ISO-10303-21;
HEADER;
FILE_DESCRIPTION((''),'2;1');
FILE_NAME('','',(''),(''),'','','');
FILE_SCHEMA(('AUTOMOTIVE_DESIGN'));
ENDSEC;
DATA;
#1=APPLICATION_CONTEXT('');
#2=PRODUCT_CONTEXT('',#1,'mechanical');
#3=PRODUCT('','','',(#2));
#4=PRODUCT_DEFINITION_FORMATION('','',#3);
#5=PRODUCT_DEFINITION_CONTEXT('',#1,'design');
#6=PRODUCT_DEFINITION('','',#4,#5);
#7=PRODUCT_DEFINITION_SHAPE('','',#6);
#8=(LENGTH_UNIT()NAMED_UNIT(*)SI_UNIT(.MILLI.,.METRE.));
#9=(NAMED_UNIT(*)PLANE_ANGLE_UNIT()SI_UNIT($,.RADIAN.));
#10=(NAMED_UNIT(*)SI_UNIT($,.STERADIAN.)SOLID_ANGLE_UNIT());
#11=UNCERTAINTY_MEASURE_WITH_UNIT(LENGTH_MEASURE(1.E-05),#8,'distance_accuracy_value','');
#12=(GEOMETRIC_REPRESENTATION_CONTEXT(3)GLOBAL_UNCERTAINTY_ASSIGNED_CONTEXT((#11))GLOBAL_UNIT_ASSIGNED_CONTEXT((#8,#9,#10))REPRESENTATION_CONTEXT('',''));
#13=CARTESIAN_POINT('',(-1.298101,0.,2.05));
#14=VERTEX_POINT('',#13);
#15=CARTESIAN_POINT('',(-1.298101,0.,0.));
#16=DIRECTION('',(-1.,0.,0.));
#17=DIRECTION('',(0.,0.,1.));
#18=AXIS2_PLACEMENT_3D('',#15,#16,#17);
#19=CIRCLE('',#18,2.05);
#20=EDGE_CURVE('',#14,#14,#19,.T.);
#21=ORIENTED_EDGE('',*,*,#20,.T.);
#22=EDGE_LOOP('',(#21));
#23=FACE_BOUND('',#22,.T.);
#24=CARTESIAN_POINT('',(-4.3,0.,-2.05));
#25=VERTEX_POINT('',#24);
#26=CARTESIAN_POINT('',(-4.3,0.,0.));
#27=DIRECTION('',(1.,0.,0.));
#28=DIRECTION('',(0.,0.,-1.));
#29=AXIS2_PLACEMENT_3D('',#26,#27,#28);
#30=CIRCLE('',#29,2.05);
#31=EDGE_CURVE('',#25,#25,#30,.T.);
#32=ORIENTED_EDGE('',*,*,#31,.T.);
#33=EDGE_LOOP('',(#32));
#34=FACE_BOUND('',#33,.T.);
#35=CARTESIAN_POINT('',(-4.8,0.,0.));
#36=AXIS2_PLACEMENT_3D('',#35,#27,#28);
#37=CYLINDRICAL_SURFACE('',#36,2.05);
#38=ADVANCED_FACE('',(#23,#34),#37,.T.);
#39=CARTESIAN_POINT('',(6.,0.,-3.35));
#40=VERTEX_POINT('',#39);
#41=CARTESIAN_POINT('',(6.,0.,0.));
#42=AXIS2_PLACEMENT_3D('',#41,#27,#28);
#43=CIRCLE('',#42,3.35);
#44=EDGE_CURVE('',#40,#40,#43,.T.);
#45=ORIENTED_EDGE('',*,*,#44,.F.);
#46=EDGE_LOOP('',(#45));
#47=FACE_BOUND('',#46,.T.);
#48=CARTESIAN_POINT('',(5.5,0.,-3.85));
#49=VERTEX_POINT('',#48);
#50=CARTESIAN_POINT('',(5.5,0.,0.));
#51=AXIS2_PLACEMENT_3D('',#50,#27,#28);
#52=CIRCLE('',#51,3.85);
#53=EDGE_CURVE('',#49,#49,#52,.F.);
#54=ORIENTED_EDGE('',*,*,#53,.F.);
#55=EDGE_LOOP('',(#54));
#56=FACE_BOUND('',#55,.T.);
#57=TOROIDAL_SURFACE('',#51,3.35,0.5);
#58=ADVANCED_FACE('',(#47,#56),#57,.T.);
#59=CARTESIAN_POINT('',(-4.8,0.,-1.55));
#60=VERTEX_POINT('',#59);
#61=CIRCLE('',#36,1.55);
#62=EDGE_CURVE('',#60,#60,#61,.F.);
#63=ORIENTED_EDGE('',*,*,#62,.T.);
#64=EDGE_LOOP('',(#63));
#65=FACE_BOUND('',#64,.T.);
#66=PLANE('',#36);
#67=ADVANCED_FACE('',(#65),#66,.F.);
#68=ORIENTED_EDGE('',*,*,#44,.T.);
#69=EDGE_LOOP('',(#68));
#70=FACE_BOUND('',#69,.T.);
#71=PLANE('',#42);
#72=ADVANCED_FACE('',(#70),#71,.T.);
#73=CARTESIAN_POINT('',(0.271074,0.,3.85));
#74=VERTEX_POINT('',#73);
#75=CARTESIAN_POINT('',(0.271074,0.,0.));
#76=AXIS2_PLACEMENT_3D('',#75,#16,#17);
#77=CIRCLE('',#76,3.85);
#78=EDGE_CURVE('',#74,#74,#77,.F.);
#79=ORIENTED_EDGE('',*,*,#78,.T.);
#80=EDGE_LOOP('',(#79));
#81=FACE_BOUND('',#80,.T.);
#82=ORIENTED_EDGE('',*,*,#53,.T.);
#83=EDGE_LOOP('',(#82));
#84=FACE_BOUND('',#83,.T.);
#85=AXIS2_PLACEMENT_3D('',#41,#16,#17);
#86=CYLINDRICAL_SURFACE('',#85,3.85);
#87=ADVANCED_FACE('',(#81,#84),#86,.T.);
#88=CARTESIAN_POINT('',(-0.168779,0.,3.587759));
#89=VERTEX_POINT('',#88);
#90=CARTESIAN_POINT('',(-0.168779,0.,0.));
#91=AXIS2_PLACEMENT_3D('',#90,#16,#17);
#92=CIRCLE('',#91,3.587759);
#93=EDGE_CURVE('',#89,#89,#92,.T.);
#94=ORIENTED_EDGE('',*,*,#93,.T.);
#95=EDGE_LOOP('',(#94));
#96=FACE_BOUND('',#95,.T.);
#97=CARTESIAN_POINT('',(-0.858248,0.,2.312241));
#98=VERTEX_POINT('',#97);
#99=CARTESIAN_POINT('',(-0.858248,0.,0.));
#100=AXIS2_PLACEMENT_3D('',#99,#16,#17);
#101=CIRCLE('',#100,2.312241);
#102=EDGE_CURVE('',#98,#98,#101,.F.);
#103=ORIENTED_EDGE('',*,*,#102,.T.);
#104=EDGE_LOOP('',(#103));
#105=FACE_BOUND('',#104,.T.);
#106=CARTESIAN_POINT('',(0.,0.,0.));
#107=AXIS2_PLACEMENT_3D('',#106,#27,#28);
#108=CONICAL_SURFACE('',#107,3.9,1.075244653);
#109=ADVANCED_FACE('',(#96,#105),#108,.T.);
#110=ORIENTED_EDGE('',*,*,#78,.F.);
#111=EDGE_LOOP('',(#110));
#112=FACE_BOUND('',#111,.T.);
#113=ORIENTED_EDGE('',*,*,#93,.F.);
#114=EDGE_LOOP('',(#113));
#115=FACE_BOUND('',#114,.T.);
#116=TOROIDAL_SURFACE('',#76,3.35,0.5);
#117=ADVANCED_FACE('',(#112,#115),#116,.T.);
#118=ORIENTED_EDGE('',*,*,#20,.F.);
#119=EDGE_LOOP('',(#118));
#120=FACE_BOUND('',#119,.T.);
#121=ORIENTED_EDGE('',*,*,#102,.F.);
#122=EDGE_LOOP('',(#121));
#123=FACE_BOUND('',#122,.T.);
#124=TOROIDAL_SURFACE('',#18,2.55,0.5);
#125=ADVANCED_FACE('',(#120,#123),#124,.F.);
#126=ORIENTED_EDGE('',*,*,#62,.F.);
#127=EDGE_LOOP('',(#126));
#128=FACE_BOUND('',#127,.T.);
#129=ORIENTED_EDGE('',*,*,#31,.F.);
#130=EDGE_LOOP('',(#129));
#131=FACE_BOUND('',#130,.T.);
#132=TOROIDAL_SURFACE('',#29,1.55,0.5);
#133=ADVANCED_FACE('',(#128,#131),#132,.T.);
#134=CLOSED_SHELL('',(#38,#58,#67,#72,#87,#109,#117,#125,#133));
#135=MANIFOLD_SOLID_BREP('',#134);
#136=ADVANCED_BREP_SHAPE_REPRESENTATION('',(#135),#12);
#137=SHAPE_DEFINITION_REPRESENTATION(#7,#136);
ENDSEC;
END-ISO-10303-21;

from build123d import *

# Parameters (mm, degrees)
CROQUIS1_R              = 3.85
CROQUIS1_R_2            = 2.05
SALIENTE_EXTRUIR1_DEPTH = 6
CROQUIS1_3_R            = 2.05
SALIENTE_EXTRUIR2_DEPTH = 4.8
CHAFL_N1_SIZE           = 1.85
CHAFL_N1_SIZE_2         = 1
REDONDEO1_R             = 0.5


with BuildPart() as part:
    # Croquis1 → Saliente-Extruir1 (new body)
    # profile 1 of 2: a face of its own
    with BuildSketch(Plane.YZ):
        with Locations(Location((0, 0, 0), (0, 0, 270))):
            Circle(CROQUIS1_R)
        Circle(CROQUIS1_R_2, mode=Mode.SUBTRACT)
    # profile 2 of 2: a face of its own
    with BuildSketch(Plane.YZ):
        Circle(CROQUIS1_R_2)
    extrude(amount=SALIENTE_EXTRUIR1_DEPTH)

    # Croquis1<3> → Saliente-Extruir2 (add)
    with BuildSketch(Plane.YZ):
        with Locations(Location((0, 0, 0), (0, 0, 270))):
            Circle(CROQUIS1_3_R)
    extrude(amount=-SALIENTE_EXTRUIR2_DEPTH)

    # Chaflán1
    # the kernel refuses this chamfer: 1.85, 1 mm, written as the material it adds along each edge
    with BuildSketch(Plane(origin=(0, 0, 0), x_dir=(0, 0, -1), z_dir=(0, -1, 0))) as chafl_n1_piece_1_section:
        Polygon((2.05 + CHAFL_N1_SIZE, 0), (2.05, -CHAFL_N1_SIZE_2), (2.05, 0), align=None)
    chafl_n1_piece_1 = revolve(axis=Axis((0, 0, 0), (1, 0, 0)), mode=Mode.PRIVATE)
    chafl_n1_piece_1 = chafl_n1_piece_1 & Plane(origin=(-0.508255833, 0, 0), x_dir=(0, 0, -1), z_dir=(-1, 0, 0)) * Cylinder(3.85, 16, mode=Mode.PRIVATE)
    add(chafl_n1_piece_1)

    # Redondeo1
    redondeo1_edges = [part.edges().sort_by_distance(p)[0] for p in [
        (-1, 0, 2.05),
        (-0.027027027, 0, 3.85),
        (6, 0, 3.85),
        (-4.8, 0, 2.05),
    ]]
    fillet(redondeo1_edges, radius=REDONDEO1_R)


solid = part.part
